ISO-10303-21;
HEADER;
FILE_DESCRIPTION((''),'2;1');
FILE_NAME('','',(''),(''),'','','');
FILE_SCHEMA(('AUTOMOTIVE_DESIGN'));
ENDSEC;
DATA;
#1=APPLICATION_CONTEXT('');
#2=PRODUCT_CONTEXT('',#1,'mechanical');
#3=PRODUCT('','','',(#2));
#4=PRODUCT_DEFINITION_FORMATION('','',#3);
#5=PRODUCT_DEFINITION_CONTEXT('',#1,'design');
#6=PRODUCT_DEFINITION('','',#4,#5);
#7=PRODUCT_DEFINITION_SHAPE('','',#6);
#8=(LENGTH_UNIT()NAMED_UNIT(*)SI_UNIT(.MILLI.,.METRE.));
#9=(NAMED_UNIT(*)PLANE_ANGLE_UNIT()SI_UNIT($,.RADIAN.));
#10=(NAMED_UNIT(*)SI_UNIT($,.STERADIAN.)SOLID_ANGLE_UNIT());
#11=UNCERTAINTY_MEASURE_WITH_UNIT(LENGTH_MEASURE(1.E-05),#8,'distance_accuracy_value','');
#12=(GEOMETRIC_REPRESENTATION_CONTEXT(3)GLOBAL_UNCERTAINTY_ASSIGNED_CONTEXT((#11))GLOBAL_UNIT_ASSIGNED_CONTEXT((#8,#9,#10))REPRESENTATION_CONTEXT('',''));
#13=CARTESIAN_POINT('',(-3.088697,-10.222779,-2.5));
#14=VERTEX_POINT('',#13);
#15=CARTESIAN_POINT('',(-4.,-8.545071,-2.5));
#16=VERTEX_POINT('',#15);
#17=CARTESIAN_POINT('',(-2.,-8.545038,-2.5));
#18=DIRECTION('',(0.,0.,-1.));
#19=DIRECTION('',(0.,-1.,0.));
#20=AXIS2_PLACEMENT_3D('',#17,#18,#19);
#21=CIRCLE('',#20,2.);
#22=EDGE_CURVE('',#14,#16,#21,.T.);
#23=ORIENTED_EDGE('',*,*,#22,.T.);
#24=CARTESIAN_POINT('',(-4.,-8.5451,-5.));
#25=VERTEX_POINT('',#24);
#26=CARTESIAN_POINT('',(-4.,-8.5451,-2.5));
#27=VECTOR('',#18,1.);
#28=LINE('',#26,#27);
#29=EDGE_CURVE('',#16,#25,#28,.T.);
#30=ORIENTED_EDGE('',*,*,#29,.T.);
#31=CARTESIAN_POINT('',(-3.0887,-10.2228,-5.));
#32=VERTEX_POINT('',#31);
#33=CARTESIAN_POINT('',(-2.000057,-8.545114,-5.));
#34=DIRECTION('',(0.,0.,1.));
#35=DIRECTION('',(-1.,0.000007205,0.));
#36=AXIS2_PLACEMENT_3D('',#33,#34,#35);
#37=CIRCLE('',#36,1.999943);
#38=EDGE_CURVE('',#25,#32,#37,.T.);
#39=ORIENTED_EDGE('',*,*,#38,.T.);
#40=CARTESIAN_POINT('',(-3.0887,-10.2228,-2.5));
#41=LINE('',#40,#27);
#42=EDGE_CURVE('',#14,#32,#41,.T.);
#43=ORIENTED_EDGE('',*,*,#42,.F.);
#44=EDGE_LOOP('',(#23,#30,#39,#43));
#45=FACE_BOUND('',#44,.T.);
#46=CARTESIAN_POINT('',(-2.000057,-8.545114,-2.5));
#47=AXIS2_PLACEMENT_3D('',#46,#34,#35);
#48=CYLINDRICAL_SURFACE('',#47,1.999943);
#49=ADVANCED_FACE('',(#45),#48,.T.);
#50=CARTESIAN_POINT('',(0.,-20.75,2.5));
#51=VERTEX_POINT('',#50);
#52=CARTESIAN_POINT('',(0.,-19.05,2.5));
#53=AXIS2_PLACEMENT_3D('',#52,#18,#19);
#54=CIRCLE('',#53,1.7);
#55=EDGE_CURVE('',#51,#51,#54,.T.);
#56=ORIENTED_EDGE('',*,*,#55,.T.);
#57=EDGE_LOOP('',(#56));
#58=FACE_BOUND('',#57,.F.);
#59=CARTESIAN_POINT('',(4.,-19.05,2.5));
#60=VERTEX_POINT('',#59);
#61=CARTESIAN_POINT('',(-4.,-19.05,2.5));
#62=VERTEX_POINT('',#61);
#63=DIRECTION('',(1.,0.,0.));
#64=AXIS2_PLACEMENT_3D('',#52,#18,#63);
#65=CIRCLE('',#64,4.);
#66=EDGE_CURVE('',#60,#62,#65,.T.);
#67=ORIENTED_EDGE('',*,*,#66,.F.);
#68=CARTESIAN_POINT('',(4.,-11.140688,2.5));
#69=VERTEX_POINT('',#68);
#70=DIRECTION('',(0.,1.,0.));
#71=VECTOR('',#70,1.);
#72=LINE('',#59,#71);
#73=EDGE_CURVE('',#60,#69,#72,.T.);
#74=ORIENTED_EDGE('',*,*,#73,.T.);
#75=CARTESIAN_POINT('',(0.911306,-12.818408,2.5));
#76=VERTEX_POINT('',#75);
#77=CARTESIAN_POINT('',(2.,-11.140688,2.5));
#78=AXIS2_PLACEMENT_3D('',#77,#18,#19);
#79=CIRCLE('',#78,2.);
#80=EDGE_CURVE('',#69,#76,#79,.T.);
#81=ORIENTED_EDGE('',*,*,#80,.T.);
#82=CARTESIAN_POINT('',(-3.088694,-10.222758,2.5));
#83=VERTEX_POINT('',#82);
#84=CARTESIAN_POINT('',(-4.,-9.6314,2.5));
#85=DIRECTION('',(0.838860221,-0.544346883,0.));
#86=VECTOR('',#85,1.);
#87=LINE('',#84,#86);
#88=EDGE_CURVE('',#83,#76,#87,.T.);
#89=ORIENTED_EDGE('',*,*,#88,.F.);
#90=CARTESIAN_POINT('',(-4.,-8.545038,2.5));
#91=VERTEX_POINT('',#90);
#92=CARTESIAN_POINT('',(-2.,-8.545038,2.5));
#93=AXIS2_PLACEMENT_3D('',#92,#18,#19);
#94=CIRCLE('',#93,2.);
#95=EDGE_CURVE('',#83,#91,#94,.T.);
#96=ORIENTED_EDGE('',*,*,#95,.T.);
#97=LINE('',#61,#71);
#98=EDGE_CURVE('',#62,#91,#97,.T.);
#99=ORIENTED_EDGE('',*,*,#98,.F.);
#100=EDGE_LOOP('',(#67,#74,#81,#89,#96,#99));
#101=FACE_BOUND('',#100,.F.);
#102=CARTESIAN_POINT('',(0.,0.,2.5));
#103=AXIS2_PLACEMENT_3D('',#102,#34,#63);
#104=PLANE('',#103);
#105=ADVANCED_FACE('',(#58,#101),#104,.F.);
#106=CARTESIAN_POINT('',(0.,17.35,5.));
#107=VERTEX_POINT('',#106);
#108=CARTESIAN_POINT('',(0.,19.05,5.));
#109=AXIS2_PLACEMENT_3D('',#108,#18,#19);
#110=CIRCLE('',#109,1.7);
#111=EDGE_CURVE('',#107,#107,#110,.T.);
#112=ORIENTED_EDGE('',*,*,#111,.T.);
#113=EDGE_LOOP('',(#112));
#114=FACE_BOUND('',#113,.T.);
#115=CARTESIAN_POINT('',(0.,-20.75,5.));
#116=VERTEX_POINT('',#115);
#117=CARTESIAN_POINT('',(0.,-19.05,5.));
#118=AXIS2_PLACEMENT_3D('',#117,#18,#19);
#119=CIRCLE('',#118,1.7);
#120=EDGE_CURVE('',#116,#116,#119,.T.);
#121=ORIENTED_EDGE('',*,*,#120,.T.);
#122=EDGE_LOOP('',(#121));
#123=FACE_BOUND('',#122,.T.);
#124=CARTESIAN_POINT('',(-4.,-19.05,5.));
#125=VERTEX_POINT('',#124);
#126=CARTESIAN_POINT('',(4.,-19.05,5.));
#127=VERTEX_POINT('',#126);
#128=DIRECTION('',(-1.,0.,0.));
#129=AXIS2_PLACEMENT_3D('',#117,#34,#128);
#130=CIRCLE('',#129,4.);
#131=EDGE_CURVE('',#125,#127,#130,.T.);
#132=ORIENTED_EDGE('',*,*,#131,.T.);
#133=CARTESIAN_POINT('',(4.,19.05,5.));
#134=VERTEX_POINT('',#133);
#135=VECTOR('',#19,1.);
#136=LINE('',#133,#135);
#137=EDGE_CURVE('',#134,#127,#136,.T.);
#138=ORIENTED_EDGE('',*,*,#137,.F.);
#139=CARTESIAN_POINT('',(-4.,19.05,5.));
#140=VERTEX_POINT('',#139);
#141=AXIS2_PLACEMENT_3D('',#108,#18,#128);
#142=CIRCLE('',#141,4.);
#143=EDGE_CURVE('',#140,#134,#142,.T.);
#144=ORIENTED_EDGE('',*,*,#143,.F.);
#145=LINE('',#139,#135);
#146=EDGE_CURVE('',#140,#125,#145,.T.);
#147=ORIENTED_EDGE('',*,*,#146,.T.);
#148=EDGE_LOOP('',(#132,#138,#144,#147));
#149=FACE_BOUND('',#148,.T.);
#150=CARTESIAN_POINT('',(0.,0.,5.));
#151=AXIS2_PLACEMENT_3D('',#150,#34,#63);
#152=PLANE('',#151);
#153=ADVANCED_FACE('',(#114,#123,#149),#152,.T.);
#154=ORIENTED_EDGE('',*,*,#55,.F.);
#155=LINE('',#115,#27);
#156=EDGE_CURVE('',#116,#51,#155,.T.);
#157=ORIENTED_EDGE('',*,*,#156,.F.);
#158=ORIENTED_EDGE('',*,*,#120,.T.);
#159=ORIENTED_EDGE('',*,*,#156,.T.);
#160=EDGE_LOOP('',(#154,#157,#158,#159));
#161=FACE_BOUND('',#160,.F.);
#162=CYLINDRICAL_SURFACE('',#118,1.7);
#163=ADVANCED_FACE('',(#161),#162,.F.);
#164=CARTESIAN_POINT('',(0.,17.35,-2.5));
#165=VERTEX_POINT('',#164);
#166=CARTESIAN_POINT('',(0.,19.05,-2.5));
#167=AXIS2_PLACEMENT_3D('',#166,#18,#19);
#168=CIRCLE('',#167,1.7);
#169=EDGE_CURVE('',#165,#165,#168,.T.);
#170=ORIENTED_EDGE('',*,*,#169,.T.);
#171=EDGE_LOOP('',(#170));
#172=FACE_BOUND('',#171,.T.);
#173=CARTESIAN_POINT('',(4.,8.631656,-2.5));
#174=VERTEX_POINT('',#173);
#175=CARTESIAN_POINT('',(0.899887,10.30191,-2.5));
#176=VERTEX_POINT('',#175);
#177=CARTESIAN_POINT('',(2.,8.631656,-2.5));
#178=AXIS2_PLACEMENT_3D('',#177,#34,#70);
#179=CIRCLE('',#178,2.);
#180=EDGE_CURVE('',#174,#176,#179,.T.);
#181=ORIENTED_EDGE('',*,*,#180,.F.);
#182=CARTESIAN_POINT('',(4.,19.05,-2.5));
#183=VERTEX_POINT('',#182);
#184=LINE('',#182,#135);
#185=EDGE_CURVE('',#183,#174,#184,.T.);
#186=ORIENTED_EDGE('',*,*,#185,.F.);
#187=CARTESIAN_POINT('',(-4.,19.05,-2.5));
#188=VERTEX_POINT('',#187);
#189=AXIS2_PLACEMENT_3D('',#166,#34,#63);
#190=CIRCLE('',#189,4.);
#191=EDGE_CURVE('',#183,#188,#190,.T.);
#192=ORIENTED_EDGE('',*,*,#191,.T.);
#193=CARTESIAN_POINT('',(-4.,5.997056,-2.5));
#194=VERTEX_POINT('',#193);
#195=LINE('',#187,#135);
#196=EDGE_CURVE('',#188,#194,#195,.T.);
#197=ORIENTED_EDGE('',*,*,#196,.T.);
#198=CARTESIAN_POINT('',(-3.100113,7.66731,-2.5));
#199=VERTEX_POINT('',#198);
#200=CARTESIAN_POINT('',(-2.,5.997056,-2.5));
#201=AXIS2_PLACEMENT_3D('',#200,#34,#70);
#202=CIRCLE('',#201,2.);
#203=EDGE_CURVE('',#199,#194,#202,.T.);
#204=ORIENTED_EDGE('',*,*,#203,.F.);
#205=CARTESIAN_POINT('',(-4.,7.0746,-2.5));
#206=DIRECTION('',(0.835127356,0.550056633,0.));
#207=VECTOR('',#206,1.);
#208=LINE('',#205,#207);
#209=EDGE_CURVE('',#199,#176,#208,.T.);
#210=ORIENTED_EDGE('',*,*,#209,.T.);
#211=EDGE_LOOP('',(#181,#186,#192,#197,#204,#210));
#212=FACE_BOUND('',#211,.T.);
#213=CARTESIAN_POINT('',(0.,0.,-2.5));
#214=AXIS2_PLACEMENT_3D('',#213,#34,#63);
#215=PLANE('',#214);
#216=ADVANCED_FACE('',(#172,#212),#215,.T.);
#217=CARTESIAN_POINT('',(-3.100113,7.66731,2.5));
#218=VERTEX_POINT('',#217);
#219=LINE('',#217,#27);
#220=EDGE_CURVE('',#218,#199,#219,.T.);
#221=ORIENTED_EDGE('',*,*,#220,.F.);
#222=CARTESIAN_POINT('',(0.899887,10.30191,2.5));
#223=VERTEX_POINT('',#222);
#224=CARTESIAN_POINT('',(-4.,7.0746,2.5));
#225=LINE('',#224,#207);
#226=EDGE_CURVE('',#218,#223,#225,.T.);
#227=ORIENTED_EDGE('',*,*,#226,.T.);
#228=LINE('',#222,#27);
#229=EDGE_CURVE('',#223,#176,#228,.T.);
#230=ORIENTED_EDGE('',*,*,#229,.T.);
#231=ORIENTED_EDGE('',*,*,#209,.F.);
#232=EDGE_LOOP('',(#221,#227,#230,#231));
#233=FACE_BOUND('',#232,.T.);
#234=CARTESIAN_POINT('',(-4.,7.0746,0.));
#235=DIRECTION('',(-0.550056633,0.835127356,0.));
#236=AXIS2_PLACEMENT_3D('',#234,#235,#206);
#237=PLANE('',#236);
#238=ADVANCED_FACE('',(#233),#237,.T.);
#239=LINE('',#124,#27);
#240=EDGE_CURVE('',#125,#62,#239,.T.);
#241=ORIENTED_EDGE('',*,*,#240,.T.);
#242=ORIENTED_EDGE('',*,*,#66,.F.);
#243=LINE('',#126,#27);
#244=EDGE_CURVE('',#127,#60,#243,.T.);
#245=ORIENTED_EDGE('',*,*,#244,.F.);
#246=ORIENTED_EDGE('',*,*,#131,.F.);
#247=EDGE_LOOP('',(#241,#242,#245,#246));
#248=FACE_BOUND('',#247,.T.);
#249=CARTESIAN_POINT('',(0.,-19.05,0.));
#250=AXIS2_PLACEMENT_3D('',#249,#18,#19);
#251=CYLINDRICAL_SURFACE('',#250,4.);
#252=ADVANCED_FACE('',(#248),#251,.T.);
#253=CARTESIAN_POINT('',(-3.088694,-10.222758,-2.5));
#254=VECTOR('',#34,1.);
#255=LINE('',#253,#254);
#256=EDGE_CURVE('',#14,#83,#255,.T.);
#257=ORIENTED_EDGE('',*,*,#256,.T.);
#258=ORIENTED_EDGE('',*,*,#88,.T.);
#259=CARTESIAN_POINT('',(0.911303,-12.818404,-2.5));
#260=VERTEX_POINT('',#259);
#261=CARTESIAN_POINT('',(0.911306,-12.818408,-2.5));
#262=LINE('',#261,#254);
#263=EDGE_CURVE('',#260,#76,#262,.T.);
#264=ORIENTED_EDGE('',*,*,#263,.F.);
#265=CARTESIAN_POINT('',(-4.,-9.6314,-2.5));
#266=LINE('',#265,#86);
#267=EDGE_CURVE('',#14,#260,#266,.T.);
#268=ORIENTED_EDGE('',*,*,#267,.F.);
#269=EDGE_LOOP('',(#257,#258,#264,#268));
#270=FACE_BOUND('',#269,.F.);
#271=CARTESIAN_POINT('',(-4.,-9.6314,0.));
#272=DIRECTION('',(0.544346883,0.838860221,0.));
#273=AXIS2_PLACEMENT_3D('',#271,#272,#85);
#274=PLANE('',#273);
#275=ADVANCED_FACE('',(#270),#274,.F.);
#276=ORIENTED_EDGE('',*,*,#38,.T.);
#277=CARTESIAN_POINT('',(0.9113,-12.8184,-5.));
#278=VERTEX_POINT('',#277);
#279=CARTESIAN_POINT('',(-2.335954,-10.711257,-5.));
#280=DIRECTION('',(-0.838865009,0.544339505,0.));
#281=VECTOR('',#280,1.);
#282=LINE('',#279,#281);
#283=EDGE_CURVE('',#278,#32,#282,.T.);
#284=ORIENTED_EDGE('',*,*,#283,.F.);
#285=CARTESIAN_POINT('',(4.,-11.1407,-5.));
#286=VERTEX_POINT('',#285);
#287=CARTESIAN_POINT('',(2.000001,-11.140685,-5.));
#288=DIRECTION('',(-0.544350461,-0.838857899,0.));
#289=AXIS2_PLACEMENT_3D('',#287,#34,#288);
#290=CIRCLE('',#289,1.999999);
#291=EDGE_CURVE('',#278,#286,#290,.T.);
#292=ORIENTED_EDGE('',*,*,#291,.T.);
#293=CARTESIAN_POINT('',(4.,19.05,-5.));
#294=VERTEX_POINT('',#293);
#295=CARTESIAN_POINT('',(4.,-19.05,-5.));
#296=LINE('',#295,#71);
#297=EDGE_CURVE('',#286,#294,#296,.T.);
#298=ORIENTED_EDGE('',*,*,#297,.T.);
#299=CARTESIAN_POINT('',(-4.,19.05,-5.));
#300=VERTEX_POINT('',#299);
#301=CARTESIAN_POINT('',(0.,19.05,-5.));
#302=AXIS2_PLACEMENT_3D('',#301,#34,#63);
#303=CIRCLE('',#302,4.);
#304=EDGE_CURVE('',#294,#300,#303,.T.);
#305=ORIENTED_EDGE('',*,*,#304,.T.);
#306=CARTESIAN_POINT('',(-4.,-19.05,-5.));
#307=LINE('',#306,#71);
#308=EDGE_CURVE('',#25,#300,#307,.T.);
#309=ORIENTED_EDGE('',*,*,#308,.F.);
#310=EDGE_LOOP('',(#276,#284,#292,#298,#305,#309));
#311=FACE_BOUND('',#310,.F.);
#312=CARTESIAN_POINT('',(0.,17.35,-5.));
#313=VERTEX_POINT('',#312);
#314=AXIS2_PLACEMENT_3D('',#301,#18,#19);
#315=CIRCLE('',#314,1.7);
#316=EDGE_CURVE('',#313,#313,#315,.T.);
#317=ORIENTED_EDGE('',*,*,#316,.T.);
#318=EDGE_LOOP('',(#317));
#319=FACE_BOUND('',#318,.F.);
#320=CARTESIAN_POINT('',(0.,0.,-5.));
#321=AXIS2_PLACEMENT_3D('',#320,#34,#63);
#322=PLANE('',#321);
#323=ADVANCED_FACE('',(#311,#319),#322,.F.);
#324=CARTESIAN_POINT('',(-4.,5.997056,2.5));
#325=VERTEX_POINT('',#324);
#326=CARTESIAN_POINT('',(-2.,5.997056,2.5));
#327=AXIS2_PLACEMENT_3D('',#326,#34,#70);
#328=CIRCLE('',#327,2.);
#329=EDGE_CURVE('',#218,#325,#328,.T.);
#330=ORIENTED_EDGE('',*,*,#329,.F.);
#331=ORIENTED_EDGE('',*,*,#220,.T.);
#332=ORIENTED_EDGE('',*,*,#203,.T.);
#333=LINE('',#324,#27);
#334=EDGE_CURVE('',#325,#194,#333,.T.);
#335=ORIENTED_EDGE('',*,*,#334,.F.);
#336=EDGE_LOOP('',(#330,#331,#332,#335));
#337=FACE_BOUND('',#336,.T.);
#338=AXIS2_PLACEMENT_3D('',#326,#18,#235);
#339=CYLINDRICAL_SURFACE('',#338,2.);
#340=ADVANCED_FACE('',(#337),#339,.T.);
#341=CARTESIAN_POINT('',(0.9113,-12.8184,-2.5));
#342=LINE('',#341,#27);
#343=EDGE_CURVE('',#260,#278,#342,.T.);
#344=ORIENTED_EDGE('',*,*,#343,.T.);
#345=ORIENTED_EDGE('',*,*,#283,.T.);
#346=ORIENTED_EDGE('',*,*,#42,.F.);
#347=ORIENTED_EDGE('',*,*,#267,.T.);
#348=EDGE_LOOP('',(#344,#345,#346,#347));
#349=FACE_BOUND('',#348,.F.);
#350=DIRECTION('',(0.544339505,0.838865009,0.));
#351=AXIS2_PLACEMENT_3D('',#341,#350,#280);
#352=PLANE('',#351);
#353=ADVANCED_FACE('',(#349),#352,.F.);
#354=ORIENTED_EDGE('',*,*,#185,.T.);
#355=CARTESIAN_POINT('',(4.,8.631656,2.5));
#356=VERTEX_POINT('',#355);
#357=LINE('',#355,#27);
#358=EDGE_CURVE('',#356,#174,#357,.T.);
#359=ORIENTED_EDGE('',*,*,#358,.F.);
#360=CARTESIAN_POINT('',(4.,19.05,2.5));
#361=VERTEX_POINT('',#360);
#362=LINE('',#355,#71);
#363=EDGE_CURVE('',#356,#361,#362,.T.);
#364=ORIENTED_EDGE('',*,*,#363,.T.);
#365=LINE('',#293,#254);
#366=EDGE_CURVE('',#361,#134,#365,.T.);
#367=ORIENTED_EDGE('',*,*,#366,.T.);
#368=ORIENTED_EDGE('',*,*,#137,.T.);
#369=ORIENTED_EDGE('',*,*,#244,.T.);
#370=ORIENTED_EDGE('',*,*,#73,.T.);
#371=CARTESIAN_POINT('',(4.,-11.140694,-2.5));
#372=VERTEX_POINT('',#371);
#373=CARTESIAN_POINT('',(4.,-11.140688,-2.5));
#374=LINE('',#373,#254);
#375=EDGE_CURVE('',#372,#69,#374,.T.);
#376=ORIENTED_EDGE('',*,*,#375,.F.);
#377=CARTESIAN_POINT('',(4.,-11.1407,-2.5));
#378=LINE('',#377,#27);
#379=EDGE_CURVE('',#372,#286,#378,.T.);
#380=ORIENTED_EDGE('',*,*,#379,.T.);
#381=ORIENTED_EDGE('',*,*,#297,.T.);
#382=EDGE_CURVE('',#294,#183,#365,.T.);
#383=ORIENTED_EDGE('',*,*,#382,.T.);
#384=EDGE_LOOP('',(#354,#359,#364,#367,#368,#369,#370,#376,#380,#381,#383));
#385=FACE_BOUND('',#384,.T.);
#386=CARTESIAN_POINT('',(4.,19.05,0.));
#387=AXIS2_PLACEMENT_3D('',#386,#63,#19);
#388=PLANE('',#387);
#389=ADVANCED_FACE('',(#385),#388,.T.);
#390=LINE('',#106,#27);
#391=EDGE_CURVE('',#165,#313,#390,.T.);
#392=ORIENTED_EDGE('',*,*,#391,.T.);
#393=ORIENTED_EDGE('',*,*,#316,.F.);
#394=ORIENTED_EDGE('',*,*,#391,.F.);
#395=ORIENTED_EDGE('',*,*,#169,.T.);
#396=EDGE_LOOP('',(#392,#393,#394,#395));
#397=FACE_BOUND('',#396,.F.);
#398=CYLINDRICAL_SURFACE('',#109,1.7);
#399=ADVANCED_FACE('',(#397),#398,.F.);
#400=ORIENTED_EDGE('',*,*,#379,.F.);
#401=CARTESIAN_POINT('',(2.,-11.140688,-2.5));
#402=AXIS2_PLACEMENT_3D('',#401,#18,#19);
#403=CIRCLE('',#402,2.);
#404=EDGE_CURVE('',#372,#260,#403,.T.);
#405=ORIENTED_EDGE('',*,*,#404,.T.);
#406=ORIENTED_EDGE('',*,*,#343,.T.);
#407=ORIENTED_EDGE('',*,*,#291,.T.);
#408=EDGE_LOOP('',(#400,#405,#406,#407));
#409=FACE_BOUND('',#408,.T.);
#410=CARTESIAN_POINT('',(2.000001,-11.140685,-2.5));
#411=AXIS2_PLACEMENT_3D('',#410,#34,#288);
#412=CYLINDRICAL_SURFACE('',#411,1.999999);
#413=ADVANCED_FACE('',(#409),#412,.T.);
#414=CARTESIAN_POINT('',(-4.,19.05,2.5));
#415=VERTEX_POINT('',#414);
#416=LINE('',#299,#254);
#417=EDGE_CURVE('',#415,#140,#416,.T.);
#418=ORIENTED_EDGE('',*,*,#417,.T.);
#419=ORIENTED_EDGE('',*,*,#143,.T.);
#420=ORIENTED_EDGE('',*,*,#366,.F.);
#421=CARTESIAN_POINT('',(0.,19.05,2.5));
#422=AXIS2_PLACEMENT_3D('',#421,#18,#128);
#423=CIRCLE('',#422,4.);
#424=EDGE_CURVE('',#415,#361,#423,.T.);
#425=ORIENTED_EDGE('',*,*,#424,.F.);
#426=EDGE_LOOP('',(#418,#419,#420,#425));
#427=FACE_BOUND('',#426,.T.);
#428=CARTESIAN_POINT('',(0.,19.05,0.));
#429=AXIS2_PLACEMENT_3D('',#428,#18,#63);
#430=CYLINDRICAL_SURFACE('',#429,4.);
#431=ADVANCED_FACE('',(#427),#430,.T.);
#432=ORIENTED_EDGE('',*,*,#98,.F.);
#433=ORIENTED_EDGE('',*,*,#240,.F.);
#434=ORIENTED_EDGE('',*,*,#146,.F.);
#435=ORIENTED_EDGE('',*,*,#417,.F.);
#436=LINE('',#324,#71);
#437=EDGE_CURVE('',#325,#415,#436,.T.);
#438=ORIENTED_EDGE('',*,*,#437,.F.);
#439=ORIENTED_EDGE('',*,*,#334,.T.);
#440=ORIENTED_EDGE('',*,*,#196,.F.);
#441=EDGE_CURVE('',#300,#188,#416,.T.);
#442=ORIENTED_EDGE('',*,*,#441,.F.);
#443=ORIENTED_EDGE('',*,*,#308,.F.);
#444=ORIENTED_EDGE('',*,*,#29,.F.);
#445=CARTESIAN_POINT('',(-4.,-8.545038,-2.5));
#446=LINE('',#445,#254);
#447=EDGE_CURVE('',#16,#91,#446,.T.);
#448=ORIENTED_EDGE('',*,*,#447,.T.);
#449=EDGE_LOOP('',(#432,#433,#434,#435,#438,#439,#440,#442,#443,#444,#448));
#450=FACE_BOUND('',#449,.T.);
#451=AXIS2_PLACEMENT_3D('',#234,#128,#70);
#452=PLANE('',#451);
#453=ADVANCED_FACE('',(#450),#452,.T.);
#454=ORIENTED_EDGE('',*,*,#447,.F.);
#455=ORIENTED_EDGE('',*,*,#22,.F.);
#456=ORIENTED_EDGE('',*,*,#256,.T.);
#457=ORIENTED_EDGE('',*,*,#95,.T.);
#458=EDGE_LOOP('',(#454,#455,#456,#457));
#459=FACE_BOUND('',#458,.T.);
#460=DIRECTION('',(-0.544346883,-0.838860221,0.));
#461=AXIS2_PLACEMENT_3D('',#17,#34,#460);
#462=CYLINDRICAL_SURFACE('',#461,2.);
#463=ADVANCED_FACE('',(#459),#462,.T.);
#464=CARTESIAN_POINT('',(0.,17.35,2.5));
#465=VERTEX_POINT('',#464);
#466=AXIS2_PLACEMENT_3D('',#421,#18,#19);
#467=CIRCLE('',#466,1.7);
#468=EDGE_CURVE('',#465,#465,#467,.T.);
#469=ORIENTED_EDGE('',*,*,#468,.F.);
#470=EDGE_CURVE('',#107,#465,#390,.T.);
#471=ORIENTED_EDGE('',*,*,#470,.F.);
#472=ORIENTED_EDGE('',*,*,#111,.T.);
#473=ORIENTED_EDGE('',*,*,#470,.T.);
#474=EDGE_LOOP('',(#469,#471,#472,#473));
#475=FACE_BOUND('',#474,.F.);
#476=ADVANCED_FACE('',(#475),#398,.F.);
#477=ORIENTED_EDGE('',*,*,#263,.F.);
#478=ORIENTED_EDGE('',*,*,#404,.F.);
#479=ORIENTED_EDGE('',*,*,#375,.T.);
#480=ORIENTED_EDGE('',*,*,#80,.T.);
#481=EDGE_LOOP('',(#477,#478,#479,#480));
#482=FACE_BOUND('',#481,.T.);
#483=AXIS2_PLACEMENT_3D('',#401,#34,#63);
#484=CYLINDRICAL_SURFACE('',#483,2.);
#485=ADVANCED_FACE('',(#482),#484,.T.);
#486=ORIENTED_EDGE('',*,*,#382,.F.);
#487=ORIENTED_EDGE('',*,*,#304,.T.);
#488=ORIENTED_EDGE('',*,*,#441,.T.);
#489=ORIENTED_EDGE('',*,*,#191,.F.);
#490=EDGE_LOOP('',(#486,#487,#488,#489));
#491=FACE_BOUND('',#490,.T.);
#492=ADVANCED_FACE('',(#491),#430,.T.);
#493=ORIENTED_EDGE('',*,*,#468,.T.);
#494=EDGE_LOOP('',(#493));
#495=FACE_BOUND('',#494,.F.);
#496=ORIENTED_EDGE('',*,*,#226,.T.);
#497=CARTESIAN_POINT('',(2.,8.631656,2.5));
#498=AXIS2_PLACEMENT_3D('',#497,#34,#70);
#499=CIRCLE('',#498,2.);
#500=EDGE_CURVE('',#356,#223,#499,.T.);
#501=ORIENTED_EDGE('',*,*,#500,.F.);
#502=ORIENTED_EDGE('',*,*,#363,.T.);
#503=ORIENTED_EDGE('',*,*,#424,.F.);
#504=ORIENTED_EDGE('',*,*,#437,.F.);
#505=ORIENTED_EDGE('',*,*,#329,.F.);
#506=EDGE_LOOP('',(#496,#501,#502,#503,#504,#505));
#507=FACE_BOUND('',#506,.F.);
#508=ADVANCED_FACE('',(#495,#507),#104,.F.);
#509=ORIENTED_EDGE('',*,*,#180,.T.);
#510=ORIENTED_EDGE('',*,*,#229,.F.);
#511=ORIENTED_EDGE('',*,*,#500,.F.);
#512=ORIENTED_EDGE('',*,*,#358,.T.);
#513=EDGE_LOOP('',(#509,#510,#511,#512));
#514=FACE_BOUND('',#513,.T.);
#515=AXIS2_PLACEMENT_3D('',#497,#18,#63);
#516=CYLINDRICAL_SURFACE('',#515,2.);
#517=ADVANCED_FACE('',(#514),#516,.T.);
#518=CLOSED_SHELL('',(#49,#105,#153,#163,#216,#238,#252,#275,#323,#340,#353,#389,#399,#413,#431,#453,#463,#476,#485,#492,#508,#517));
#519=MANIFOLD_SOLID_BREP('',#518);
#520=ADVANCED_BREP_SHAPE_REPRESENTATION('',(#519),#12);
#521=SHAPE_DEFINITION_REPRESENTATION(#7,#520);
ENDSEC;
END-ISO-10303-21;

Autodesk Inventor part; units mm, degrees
ref_plane "YZ Plane" through (0, 0, 0) normal (1, 0, 0) x (0, 1, 0)
ref_plane "XZ Plane" through (0, 0, 0) normal (0, 1, 0) x (-1, 0, 0)
ref_plane "XY Plane" through (0, 0, 0) normal (0, 0, 1) x (1, 0, 0)
sketch "Sketch1" plane through (0, 0, 0) normal (0, 0, 1) x (1, 0, 0)
  line L0 (0, 23.05) -> (0, 23.05)
  line L1 (4, 19.05) -> (4, 12.3438)
  line L2 (0, -23.05) -> (0, -23.05)
  line L3 (-4, -19.05) -> (-4, -9.6314)
  line L4 (-4, 23.05) -> (0, 23.05) construction
  line L5 (0, 23.05) -> (0, 0) construction
  line L6 (0, 0) -> (-4, 0) construction
  line L7 (-4, 0) -> (-4, 23.05) construction
  arc A0 (4, 19.05) -> (0, 23.05) centre (0, 19.05) ccw
  arc A1 (0, 23.05) -> (-4, 19.05) centre (0, 19.05) ccw
  arc A2 (-4, -19.05) -> (0, -23.05) centre (0, -19.05) ccw
  arc A3 (0, -23.05) -> (4, -19.05) centre (0, -19.05) ccw
  line L8 (-4, 7.0746) -> (4, 12.3438)
  line L9 (-4, 7.0746) -> (-4, 19.05)
  line L10 (4, 12.3438) -> (4, -14.8227)
  line L11 (-4, -9.6314) -> (4, -14.8227)
  line L12 (-4, -9.6314) -> (-4, 7.0746)
  line L13 (4, -14.8227) -> (4, -19.05)
  dimension "d0" = 4
  dimension "d6" = 38.1
extrude "Extrusion5" add sketch "Sketch1" along normal mid plane 10
extrude "Extrusion6" cut sketch "Sketch1" along normal mid plane 5 contours L1 L8 L9 A1 A0 | L13 A3 A2 L3 L11
sketch "Sketch4" plane through (0, 0, 5) normal (0, 0, 1) x (1, 0, 0)
  arc A0 (4, 19.05) -> (-4, 19.05) centre (0, 19.05) ccw projected
  arc A1 (-4, -19.05) -> (4, -19.05) centre (0, -19.05) ccw projected
  point P0 (0, 0)
hole "Hole3" at (0, -19.05, 5) at (0, 19.05, 5) direction (0, 0, -1) diameter 3.4 end through all
fillet "Fillet1" radius 2 4 edges at (4, -14.8227, 0) (4, 12.3438, 0) (-4, 7.0746, 0) (-4, -9.6314, 0)
sketch "Sketch5" plane through (0, 0, -2.5) normal (0, 0, 1) x (1, 0, 0)
  circle A0 centre (0, -19.05) radius 1.7 projected
  arc A1 (-4, -19.05) -> (4, -19.05) centre (0, -19.05) ccw projected
  line L0 (4, -11.1407) -> (4, -19.05) projected
  arc A2 (0.9113, -12.8184) -> (4, -11.1407) centre (2, -11.1407) ccw projected
  line L1 (0.9113, -12.8184) -> (-3.0887, -10.2228) projected
  arc A3 (-4, -8.5451) -> (-3.0887, -10.2228) centre (-2, -8.5451) ccw projected
  line L2 (-4, -19.05) -> (-4, -8.5451) projected
  point P0 (0, 0)
extrude "Extrusion7" cut sketch "Sketch5" against normal through all
equation "\"d6\" = LengthK"
equation "\"LengthK\" = 38.1"
properties part number "F"
